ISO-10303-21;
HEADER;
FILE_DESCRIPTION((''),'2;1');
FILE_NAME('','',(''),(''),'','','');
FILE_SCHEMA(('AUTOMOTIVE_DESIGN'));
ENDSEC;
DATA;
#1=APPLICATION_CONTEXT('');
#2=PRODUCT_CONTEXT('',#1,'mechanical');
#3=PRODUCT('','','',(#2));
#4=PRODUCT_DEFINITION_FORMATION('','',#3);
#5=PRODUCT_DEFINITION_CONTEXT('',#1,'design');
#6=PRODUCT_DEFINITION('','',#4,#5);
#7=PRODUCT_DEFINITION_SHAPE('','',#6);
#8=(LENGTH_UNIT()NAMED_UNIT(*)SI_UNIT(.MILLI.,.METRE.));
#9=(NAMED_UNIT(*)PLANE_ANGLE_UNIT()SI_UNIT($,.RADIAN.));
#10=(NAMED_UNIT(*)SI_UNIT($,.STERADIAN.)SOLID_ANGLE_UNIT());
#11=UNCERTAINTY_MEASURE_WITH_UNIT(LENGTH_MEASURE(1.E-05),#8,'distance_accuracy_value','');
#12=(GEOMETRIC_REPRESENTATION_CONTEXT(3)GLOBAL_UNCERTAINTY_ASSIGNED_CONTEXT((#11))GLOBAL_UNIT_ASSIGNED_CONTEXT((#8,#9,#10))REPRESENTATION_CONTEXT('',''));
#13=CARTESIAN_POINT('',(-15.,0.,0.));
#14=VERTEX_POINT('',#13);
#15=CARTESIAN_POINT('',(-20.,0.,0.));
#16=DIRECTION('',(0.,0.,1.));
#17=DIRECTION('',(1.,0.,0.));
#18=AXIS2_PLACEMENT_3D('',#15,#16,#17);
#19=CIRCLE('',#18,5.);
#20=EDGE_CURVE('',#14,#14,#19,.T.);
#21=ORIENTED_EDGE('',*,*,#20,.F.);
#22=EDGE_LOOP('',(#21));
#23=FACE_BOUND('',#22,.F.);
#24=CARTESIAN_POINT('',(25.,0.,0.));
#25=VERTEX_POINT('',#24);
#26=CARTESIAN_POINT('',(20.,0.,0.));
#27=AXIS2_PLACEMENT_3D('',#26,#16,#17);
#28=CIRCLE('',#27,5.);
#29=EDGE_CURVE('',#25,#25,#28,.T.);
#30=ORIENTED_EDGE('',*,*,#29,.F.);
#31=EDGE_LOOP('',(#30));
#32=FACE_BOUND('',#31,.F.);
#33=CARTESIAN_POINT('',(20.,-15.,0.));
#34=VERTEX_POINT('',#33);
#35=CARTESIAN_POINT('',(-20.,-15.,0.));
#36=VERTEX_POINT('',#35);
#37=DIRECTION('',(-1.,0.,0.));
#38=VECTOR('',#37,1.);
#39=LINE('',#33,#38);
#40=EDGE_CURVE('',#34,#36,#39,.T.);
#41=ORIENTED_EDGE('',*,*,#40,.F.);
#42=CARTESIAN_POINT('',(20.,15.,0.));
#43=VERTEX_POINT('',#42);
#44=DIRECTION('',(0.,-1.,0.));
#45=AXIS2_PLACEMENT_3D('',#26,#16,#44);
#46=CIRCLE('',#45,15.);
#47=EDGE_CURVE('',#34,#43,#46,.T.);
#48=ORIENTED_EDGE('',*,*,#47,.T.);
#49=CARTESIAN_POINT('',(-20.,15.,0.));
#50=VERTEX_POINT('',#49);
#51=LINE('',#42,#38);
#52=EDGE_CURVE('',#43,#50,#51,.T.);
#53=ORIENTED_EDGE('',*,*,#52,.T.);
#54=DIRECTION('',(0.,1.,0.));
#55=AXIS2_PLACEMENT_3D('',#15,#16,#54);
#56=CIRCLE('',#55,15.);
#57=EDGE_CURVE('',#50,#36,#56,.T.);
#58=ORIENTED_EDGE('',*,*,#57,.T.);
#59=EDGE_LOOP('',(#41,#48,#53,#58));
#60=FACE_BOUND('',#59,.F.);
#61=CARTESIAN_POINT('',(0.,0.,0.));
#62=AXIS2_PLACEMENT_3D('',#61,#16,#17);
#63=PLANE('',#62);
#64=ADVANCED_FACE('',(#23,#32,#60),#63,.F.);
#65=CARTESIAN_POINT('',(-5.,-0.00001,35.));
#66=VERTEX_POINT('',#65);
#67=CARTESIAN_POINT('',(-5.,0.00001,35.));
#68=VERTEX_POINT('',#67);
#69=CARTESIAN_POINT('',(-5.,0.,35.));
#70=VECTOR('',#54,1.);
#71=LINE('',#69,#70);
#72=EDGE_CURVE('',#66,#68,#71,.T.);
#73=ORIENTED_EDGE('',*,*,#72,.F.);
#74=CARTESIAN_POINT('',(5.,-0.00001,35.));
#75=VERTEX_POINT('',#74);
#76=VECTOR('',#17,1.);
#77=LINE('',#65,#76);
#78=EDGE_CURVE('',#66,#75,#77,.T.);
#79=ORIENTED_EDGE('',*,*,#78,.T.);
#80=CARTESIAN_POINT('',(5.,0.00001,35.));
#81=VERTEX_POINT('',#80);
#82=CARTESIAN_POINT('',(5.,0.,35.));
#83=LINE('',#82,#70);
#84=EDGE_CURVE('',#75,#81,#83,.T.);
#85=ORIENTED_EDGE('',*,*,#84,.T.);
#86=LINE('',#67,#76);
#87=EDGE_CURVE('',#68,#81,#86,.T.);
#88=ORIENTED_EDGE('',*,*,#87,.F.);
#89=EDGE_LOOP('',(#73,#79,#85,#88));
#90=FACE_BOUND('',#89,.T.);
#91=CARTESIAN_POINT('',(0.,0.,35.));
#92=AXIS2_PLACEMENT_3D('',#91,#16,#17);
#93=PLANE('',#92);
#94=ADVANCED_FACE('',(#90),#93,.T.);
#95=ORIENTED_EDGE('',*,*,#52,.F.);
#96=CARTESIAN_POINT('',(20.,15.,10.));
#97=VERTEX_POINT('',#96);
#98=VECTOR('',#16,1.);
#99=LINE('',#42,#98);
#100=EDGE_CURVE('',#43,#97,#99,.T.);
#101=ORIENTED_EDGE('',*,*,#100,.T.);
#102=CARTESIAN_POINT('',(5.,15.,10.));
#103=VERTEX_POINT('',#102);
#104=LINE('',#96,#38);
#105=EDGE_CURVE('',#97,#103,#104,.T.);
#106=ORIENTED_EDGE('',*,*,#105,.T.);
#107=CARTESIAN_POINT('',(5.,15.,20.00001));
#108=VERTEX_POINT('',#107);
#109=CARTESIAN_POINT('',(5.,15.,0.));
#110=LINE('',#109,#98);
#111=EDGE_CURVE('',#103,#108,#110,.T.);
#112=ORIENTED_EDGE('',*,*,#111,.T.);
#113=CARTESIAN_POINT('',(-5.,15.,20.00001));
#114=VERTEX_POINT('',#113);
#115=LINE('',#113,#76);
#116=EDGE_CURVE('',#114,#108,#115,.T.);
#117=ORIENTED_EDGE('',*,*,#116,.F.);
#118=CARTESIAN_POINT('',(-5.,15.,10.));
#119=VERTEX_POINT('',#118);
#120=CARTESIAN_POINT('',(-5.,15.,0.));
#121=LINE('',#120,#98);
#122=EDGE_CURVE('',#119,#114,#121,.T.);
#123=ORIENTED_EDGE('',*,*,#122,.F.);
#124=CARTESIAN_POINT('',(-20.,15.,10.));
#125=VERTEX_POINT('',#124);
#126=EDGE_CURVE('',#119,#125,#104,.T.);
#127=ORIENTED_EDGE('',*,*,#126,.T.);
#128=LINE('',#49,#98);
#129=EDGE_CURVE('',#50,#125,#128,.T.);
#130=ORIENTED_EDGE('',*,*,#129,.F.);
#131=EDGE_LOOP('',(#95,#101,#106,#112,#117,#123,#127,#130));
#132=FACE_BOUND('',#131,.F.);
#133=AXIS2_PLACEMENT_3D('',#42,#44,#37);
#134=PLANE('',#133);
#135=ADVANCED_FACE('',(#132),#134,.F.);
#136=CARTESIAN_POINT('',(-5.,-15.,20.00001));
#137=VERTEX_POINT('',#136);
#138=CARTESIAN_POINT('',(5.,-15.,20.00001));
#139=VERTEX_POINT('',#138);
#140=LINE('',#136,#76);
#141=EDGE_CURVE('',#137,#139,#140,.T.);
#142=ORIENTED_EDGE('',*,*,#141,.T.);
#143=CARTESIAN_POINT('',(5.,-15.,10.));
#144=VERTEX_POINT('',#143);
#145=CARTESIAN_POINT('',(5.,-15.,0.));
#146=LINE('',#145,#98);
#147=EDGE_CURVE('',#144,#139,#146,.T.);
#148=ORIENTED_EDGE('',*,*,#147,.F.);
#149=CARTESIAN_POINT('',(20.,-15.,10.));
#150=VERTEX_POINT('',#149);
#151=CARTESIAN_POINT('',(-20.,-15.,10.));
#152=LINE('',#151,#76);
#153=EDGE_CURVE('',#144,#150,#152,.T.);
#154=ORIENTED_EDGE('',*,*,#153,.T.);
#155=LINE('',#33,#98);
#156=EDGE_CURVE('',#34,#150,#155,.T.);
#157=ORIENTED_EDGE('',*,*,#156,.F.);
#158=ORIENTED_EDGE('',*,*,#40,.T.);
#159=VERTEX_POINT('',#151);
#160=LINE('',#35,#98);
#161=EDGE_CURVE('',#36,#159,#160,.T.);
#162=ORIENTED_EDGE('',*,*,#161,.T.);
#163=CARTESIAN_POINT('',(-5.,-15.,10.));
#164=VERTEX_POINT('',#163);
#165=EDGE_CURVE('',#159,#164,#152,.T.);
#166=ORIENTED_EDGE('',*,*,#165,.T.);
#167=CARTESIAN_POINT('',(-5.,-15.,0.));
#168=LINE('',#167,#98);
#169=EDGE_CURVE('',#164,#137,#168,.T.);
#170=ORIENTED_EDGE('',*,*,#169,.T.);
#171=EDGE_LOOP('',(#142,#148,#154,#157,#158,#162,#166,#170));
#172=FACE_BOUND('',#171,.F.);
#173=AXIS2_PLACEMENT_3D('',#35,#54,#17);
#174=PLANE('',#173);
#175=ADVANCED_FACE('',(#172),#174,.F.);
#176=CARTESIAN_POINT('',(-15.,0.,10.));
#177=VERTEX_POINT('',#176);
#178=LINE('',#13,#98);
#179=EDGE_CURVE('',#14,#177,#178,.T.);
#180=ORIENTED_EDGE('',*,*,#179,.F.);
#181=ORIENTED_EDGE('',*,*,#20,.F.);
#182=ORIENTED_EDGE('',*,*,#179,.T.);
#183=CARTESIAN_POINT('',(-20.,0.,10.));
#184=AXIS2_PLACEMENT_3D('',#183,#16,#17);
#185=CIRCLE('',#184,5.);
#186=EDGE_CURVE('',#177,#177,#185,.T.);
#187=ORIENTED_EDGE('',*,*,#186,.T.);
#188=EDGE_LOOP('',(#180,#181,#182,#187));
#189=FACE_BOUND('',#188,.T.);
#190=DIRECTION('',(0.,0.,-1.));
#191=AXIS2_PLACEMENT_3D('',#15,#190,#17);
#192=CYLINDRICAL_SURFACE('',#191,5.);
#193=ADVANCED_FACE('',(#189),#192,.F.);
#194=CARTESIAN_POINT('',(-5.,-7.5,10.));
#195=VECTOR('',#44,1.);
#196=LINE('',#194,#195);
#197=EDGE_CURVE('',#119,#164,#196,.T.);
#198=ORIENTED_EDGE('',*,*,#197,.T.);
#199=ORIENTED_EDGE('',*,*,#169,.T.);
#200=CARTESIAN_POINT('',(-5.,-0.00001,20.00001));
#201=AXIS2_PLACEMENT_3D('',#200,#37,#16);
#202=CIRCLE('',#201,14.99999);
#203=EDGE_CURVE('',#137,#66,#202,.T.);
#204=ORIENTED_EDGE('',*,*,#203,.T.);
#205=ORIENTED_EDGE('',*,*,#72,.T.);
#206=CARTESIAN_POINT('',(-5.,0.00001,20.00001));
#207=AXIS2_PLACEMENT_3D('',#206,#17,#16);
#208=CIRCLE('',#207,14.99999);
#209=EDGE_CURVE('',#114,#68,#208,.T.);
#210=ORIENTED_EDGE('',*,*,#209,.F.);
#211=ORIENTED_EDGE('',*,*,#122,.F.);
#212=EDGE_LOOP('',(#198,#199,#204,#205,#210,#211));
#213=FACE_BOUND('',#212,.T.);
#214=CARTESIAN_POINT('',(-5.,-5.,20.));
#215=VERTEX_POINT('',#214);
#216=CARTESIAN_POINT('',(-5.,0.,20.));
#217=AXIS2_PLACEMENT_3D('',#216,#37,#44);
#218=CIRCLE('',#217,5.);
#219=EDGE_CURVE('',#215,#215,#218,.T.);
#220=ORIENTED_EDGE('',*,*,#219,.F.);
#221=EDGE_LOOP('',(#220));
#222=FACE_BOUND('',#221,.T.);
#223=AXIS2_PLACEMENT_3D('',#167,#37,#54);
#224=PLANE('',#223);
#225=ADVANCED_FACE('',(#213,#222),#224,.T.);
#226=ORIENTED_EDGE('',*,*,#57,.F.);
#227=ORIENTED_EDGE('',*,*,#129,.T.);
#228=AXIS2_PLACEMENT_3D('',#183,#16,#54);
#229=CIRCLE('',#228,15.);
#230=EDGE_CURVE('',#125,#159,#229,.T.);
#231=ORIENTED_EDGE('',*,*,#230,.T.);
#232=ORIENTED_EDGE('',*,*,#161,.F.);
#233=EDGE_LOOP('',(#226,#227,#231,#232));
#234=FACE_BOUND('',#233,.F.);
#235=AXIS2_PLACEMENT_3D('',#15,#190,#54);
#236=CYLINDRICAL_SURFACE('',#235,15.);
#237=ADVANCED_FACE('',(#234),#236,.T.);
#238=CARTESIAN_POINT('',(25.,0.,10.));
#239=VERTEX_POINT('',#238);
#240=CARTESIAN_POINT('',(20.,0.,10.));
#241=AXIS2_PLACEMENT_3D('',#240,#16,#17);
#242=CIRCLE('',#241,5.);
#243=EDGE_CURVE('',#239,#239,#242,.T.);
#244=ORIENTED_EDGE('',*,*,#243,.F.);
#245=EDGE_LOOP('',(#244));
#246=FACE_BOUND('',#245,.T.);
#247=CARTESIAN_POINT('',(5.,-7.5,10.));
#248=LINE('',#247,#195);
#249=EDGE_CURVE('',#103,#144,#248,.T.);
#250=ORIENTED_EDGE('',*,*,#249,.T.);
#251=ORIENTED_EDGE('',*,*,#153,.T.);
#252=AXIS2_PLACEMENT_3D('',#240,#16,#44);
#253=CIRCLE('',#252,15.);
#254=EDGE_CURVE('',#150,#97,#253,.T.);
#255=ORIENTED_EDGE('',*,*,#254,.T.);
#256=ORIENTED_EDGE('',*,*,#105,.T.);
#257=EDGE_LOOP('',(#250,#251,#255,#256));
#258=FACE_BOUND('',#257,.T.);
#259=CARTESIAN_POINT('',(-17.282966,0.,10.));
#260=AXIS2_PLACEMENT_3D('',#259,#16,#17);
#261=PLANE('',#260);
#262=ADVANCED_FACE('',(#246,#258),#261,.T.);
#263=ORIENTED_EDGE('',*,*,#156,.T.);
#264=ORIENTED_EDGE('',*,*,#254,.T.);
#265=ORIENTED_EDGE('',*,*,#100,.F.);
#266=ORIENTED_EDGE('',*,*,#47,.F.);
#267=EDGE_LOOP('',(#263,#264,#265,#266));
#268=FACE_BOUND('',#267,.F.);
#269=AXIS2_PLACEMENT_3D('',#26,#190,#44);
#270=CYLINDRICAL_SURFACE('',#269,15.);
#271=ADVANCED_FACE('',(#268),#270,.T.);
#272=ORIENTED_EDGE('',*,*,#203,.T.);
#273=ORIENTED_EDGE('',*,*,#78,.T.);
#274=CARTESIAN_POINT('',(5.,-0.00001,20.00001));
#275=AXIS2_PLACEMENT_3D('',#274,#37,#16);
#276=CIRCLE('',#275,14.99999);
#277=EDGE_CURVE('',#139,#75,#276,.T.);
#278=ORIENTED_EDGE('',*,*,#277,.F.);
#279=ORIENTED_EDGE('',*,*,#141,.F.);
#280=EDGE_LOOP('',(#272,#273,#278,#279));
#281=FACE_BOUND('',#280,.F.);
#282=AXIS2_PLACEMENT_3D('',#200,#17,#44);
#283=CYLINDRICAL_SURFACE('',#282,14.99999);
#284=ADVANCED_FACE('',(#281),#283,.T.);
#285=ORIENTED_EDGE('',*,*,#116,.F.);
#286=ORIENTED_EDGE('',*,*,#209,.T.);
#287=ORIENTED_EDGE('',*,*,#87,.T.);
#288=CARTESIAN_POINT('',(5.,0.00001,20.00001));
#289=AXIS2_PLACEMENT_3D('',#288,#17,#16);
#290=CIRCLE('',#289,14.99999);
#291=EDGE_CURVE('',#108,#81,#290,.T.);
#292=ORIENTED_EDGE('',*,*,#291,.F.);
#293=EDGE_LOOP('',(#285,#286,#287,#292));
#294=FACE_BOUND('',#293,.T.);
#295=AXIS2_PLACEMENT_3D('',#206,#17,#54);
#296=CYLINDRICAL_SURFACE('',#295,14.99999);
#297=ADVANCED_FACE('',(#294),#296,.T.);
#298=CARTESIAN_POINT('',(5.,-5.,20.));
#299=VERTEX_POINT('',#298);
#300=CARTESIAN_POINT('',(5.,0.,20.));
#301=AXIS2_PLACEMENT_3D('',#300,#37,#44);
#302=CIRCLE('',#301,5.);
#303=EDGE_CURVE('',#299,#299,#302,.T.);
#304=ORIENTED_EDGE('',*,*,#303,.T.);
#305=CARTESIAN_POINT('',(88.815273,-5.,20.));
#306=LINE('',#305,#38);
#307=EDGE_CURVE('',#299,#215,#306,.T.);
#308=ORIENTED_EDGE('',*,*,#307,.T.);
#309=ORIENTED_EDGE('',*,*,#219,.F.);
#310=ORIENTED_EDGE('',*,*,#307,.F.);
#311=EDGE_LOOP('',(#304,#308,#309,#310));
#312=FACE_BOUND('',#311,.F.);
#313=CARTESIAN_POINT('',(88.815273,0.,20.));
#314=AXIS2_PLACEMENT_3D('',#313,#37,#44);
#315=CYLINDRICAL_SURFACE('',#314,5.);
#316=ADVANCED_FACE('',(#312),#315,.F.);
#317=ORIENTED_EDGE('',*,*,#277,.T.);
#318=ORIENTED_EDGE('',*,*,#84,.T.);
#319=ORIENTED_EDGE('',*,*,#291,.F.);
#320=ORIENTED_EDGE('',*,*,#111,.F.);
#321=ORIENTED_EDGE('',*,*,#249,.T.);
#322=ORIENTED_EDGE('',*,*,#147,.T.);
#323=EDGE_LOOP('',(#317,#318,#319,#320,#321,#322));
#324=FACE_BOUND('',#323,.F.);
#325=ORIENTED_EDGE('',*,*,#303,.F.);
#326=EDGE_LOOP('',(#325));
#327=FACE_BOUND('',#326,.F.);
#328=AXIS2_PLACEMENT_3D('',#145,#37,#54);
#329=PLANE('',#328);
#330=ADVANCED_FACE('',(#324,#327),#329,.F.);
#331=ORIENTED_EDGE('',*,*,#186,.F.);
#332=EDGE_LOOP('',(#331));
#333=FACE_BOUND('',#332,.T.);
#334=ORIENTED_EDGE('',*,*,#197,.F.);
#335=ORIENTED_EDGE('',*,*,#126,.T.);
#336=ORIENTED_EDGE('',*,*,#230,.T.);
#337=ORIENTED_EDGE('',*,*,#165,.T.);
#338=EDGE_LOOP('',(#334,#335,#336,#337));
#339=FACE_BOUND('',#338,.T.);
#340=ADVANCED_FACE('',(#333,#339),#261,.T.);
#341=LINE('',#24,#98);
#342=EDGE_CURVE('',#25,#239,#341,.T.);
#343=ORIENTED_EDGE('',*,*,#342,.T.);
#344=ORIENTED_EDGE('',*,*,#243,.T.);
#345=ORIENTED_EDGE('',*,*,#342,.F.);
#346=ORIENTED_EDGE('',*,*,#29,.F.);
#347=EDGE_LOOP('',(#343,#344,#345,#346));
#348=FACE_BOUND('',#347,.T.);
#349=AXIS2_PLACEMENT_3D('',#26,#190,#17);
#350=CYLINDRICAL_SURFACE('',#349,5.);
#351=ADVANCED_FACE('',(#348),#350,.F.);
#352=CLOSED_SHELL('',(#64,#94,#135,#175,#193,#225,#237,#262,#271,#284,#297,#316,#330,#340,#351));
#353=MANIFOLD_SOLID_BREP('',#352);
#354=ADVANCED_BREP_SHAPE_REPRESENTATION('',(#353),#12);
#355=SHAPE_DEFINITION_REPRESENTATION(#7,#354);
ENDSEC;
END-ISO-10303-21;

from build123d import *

# Parameters (mm, degrees)
F0_R     = 5
F0_W     = 10
F0_H     = 30
F1_DEPTH = 10
F2_DEPTH = 35
F3_R     = 14.99999
F5_D     = 10


# Not quite as in the source:
# - a fillet or chamfer is up to 0.001 mm smaller than in the source, because OpenCascade refuses the exact size


with BuildPart() as f1:
    # F0 (on Top) → F1 (new body)
    with BuildSketch(Plane.XY):
        with BuildLine():
            ThreePointArc((-20, 15), (-35, 0), (-20, -15))
            Line((-20, -15), (-5, -15))
            Line((-5, -15), (-5, 15))
            Line((-5, 15), (-20, 15))
        make_face()
        with Locations((-20, 0)):
            Circle(F0_R, mode=Mode.SUBTRACT)
        with BuildLine():
            Line((5, 15), (5, -15))
            Line((5, -15), (20, -15))
            ThreePointArc((20, -15), (35, 0), (20, 15))
            Line((20, 15), (5, 15))
        make_face()
        with Locations((20, 0)):
            Circle(F0_R, mode=Mode.SUBTRACT)
        Rectangle(F0_W, F0_H)
    extrude(amount=F1_DEPTH)

    # F0 (on Top) → F2 (join)
    with BuildSketch(Plane.XY):
        Rectangle(F0_W, F0_H)
    extrude(amount=F2_DEPTH)

    # F3 (radius 15 in the source; OpenCascade refuses exactly that, so slightly less here)
    f3_edges = [f1.edges().sort_by_distance(p)[0] for p in [
        (0, -15, 35),
        (0, 15, 35),
    ]]
    fillet(f3_edges, radius=F3_R)

    # F5 (through all)
    with Locations(Plane.YZ.offset(5)):
        with Locations((0, 20)):
            Hole(F5_D / 2)


solid = f1.part
